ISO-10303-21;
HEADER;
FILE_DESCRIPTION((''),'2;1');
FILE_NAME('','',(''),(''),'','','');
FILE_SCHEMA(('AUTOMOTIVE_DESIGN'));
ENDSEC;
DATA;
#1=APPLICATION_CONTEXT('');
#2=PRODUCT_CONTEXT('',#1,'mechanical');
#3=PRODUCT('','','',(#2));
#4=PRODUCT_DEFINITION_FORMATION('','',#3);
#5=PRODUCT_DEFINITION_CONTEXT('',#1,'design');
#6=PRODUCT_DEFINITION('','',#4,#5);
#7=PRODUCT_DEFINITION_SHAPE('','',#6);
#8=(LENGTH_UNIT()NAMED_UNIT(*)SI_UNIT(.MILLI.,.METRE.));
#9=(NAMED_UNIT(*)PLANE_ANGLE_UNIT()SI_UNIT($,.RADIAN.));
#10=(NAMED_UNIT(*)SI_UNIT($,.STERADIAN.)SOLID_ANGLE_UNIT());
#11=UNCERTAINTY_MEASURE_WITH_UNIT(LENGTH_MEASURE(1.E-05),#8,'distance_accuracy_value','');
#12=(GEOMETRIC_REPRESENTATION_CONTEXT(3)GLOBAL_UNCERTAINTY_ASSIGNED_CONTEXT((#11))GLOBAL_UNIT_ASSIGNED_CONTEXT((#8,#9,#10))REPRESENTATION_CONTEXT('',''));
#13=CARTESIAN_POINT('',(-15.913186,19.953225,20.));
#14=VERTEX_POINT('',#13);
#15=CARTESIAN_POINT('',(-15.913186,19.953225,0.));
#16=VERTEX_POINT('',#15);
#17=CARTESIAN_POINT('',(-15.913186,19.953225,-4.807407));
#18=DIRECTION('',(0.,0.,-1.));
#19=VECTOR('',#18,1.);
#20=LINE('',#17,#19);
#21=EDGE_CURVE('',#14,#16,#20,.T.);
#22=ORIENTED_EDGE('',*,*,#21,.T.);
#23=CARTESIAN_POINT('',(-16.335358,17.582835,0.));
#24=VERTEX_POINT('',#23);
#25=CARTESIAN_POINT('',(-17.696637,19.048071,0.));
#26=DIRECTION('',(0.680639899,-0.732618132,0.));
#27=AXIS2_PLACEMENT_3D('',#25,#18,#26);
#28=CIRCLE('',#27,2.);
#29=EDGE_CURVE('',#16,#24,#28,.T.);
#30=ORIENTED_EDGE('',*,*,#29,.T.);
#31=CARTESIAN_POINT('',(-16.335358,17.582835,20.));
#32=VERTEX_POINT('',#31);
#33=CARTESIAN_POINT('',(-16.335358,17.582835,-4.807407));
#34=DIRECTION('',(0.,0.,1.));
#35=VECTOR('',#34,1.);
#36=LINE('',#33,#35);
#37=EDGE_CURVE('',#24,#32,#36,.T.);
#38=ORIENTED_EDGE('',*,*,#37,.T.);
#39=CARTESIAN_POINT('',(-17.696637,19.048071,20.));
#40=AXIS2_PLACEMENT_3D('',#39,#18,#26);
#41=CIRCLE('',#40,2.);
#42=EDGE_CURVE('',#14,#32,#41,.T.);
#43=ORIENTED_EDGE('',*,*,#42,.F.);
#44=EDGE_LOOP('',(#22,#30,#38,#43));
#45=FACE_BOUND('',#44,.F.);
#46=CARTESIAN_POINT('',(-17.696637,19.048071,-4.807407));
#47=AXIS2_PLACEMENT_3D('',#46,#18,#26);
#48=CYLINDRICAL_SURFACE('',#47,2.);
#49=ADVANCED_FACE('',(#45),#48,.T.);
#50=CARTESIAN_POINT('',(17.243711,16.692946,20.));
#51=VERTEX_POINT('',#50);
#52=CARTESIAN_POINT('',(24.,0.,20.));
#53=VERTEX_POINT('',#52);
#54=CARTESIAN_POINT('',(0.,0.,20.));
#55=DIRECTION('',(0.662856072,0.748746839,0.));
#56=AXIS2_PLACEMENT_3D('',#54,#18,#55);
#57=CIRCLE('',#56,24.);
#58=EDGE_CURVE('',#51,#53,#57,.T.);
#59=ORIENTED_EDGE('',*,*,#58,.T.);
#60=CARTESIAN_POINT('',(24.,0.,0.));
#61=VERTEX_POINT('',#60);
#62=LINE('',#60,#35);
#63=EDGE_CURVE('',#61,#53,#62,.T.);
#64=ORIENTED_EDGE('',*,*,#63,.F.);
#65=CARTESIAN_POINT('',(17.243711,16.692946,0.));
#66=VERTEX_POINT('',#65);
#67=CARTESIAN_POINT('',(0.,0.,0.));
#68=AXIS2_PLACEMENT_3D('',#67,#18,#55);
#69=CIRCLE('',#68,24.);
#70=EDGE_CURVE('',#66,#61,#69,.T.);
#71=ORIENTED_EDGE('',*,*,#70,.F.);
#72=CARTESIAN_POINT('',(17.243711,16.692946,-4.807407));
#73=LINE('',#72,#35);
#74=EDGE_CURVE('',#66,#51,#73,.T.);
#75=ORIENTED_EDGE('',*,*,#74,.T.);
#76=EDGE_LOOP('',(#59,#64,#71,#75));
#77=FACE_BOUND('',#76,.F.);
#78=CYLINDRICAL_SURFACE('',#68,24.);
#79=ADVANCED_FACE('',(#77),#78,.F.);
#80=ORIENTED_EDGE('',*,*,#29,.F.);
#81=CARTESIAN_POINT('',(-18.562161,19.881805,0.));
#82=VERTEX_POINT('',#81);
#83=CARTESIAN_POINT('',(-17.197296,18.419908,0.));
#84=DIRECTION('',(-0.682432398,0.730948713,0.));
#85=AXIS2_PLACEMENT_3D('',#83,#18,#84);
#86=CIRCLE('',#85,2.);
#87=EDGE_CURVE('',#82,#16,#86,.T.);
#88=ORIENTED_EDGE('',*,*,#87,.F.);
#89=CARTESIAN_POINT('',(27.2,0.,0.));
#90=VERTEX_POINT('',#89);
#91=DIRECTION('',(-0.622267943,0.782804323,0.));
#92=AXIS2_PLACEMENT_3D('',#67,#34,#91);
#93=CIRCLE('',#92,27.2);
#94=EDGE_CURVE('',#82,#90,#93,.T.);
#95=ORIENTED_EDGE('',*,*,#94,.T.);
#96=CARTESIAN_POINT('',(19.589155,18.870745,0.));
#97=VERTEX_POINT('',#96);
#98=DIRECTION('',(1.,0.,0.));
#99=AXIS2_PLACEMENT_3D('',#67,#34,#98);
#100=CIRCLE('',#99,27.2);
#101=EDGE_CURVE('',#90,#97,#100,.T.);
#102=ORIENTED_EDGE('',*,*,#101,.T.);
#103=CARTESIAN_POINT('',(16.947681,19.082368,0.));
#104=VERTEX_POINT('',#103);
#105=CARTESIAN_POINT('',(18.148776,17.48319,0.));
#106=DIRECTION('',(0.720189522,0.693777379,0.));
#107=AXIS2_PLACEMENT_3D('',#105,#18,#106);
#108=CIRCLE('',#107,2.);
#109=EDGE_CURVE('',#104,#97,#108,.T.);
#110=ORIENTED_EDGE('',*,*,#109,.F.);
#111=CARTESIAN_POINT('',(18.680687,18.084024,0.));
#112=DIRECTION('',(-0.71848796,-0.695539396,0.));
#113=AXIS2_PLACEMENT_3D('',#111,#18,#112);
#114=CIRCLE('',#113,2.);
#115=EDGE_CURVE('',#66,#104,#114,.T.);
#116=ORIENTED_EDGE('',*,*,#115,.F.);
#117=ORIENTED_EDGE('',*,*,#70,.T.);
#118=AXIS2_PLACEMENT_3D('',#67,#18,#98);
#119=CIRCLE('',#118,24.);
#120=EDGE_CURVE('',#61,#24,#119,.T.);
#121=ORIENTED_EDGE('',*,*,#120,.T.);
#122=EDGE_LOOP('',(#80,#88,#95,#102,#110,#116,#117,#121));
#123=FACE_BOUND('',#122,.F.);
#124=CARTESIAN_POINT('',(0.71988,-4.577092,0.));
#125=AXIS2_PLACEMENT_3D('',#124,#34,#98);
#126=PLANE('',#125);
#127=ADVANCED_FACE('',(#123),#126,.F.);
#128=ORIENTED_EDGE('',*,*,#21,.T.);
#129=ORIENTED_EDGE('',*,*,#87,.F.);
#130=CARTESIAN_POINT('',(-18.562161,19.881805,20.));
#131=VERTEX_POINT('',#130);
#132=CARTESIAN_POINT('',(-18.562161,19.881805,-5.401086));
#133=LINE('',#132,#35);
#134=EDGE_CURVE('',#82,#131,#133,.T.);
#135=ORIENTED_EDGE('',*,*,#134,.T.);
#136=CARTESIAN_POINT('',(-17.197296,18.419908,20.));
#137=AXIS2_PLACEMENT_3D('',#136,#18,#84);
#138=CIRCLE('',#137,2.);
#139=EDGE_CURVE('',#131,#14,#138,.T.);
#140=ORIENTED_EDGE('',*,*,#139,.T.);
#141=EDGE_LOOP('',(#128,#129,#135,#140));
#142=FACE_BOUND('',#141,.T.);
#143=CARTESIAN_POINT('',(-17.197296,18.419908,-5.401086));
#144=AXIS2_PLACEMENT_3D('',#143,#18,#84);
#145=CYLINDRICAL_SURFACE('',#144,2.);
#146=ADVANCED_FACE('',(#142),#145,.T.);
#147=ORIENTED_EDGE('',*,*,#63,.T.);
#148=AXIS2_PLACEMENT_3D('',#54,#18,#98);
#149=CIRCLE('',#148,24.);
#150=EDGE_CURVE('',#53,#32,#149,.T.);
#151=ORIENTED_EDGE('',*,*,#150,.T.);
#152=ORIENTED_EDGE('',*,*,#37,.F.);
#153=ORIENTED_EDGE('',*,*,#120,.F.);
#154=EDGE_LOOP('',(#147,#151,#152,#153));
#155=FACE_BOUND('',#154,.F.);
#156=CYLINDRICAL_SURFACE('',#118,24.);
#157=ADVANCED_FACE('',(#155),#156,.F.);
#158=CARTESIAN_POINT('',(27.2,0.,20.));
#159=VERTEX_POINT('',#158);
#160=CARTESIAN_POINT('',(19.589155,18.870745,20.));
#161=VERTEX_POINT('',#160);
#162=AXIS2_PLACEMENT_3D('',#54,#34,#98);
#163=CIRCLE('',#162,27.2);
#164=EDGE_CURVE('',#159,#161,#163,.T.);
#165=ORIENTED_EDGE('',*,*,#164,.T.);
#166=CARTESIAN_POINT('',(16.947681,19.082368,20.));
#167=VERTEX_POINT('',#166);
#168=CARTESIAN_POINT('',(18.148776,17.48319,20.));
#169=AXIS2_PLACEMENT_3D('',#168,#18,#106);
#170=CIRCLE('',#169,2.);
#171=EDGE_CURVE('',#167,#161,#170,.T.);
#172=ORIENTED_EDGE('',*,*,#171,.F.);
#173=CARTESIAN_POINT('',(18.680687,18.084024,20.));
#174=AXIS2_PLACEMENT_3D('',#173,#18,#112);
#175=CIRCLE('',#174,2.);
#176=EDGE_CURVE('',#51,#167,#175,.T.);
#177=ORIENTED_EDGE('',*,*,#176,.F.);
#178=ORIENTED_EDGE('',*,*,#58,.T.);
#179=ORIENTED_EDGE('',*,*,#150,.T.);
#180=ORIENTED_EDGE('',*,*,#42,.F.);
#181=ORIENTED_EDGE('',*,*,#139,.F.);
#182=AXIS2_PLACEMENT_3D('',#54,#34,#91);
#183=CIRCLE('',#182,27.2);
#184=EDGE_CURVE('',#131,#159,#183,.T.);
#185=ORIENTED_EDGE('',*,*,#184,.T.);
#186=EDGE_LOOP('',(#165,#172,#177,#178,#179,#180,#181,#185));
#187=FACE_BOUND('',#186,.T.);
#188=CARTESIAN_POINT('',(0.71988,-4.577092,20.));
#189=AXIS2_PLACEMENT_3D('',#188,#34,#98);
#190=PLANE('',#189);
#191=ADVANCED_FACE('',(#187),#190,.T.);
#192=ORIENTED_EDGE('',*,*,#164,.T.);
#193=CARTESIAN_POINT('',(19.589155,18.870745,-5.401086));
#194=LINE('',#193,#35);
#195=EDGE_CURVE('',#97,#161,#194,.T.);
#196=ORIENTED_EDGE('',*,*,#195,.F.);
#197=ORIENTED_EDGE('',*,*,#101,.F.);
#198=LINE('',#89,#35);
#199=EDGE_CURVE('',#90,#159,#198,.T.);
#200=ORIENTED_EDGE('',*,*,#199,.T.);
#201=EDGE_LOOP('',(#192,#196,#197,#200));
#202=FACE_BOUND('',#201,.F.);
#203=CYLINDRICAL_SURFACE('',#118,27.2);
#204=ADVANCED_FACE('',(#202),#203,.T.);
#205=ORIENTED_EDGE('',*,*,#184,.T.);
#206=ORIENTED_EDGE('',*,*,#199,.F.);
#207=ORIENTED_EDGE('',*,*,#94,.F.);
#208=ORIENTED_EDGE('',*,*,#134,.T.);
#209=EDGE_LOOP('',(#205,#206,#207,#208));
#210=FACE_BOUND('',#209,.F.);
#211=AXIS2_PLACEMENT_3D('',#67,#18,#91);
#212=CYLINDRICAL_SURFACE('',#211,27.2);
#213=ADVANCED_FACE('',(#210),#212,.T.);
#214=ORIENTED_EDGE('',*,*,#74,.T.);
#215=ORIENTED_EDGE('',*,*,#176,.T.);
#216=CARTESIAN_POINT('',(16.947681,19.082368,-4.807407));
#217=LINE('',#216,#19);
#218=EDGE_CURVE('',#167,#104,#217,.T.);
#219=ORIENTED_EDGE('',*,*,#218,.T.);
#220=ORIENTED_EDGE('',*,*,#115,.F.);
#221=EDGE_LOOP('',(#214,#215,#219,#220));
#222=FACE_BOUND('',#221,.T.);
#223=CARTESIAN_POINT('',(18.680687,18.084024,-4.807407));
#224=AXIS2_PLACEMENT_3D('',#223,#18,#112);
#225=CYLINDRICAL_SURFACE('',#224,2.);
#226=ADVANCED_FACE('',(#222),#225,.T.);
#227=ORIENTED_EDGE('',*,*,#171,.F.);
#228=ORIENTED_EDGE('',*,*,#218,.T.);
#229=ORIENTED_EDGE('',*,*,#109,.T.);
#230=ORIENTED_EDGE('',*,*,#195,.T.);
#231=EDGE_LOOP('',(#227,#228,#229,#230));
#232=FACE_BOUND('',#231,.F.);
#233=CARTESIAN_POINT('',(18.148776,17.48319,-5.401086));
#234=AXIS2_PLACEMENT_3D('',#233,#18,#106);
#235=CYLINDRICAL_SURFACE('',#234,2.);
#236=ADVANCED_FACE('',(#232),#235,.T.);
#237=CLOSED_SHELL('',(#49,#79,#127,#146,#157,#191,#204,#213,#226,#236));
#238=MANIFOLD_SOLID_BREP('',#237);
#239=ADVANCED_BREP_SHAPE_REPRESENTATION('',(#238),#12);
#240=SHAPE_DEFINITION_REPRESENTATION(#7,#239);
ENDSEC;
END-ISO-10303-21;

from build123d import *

# Parameters (mm, degrees)
F1_DEPTH    = 20
F2_T1_DEPTH = 29.6148139682
F2_T3_DEPTH = 30.8021727026


# Not quite as in the source:
# - a fillet or chamfer that OpenCascade refuses, or shapes differently, is made with other operations: its cross-section is extruded or revolved along the edge and cut away or added


with BuildPart() as f1:
    # F0 (on Top) → F1 (new body)
    with BuildSketch(Plane.XY):
        with BuildLine():
            ThreePointArc((15.9085457216, 17.9699241241), (21.8838421823, 9.8538039021), (24, 0))
            ThreePointArc((24, 0), (-10.4300926413, -21.6151143299), (-14.9344306245, 18.7873037427))
            Line((-14.9344306245, 18.7873037427), (-16.9256880412, 21.2922775751))
            ThreePointArc((-16.9256880411, 21.2922775751), (-11.8207716601, -24.4971295739), (27.2, 0))
            ThreePointArc((27.2, 0), (24.8016878066, 11.1676444224), (18.0296851511, 20.3659140073))
            Line((18.0296851511, 20.3659140073), (15.9085457216, 17.9699241241))
        make_face()
    extrude(amount=F1_DEPTH)

    # F2: fillet of radius 2 on 4 edges, made by hand

    # F2_s2 → F2_t1 (cut)
    with BuildSketch(Plane.XY.offset(-4.8074069841)):
        with BuildLine():
            ThreePointArc((-16.3353575734, 17.5828351795), (-15.7022990684, 18.8976894845), (-16.131028726, 20.2926073298))
            Line((-16.131028726, 20.2926073298), (-14.9344306245, 18.7873037427))
            ThreePointArc((-14.9344306245, 18.7873037427), (-15.6464884117, 18.1985548982), (-16.3353575734, 17.5828351795))
        make_face()
        with BuildLine():
            ThreePointArc((17.2437110419, 16.6929455011), (16.6811829734, 18.0394844298), (17.183193285, 19.4097364364))
            Line((17.183193285, 19.4097364364), (15.9085457216, 17.9699241241))
            ThreePointArc((15.9085457216, 17.9699241241), (16.5884206822, 17.3442872229), (17.2437110419, 16.6929455011))
        make_face()
    extrude(amount=F2_T1_DEPTH, mode=Mode.SUBTRACT)

    # F2_s4 → F2_t3 (cut)
    with BuildSketch(Plane.XY.offset(-5.4010863513)):
        with BuildLine():
            ThreePointArc((-18.5621612385, 19.8818050024), (-17.0493571531, 20.4144285626), (-15.6316877963, 19.6644434612))
            Line((-15.6316877963, 19.6644434612), (-16.9256880412, 21.2922775751))
            ThreePointArc((-16.9256880412, 21.2922775751), (-17.7579339971, 20.6032953713), (-18.5621612385, 19.8818050024))
        make_face()
        with BuildLine():
            ThreePointArc((19.5891550007, 18.8707447219), (18.1066850122, 19.482747002), (16.6512822795, 18.8089021064))
            Line((16.6512822795, 18.8089021064), (18.0296851511, 20.3659140073))
            ThreePointArc((18.0296851511, 20.3659140073), (18.8242706735, 19.6338186202), (19.5891550007, 18.8707447219))
        make_face()
    extrude(amount=F2_T3_DEPTH, mode=Mode.SUBTRACT)


solid = f1.part
